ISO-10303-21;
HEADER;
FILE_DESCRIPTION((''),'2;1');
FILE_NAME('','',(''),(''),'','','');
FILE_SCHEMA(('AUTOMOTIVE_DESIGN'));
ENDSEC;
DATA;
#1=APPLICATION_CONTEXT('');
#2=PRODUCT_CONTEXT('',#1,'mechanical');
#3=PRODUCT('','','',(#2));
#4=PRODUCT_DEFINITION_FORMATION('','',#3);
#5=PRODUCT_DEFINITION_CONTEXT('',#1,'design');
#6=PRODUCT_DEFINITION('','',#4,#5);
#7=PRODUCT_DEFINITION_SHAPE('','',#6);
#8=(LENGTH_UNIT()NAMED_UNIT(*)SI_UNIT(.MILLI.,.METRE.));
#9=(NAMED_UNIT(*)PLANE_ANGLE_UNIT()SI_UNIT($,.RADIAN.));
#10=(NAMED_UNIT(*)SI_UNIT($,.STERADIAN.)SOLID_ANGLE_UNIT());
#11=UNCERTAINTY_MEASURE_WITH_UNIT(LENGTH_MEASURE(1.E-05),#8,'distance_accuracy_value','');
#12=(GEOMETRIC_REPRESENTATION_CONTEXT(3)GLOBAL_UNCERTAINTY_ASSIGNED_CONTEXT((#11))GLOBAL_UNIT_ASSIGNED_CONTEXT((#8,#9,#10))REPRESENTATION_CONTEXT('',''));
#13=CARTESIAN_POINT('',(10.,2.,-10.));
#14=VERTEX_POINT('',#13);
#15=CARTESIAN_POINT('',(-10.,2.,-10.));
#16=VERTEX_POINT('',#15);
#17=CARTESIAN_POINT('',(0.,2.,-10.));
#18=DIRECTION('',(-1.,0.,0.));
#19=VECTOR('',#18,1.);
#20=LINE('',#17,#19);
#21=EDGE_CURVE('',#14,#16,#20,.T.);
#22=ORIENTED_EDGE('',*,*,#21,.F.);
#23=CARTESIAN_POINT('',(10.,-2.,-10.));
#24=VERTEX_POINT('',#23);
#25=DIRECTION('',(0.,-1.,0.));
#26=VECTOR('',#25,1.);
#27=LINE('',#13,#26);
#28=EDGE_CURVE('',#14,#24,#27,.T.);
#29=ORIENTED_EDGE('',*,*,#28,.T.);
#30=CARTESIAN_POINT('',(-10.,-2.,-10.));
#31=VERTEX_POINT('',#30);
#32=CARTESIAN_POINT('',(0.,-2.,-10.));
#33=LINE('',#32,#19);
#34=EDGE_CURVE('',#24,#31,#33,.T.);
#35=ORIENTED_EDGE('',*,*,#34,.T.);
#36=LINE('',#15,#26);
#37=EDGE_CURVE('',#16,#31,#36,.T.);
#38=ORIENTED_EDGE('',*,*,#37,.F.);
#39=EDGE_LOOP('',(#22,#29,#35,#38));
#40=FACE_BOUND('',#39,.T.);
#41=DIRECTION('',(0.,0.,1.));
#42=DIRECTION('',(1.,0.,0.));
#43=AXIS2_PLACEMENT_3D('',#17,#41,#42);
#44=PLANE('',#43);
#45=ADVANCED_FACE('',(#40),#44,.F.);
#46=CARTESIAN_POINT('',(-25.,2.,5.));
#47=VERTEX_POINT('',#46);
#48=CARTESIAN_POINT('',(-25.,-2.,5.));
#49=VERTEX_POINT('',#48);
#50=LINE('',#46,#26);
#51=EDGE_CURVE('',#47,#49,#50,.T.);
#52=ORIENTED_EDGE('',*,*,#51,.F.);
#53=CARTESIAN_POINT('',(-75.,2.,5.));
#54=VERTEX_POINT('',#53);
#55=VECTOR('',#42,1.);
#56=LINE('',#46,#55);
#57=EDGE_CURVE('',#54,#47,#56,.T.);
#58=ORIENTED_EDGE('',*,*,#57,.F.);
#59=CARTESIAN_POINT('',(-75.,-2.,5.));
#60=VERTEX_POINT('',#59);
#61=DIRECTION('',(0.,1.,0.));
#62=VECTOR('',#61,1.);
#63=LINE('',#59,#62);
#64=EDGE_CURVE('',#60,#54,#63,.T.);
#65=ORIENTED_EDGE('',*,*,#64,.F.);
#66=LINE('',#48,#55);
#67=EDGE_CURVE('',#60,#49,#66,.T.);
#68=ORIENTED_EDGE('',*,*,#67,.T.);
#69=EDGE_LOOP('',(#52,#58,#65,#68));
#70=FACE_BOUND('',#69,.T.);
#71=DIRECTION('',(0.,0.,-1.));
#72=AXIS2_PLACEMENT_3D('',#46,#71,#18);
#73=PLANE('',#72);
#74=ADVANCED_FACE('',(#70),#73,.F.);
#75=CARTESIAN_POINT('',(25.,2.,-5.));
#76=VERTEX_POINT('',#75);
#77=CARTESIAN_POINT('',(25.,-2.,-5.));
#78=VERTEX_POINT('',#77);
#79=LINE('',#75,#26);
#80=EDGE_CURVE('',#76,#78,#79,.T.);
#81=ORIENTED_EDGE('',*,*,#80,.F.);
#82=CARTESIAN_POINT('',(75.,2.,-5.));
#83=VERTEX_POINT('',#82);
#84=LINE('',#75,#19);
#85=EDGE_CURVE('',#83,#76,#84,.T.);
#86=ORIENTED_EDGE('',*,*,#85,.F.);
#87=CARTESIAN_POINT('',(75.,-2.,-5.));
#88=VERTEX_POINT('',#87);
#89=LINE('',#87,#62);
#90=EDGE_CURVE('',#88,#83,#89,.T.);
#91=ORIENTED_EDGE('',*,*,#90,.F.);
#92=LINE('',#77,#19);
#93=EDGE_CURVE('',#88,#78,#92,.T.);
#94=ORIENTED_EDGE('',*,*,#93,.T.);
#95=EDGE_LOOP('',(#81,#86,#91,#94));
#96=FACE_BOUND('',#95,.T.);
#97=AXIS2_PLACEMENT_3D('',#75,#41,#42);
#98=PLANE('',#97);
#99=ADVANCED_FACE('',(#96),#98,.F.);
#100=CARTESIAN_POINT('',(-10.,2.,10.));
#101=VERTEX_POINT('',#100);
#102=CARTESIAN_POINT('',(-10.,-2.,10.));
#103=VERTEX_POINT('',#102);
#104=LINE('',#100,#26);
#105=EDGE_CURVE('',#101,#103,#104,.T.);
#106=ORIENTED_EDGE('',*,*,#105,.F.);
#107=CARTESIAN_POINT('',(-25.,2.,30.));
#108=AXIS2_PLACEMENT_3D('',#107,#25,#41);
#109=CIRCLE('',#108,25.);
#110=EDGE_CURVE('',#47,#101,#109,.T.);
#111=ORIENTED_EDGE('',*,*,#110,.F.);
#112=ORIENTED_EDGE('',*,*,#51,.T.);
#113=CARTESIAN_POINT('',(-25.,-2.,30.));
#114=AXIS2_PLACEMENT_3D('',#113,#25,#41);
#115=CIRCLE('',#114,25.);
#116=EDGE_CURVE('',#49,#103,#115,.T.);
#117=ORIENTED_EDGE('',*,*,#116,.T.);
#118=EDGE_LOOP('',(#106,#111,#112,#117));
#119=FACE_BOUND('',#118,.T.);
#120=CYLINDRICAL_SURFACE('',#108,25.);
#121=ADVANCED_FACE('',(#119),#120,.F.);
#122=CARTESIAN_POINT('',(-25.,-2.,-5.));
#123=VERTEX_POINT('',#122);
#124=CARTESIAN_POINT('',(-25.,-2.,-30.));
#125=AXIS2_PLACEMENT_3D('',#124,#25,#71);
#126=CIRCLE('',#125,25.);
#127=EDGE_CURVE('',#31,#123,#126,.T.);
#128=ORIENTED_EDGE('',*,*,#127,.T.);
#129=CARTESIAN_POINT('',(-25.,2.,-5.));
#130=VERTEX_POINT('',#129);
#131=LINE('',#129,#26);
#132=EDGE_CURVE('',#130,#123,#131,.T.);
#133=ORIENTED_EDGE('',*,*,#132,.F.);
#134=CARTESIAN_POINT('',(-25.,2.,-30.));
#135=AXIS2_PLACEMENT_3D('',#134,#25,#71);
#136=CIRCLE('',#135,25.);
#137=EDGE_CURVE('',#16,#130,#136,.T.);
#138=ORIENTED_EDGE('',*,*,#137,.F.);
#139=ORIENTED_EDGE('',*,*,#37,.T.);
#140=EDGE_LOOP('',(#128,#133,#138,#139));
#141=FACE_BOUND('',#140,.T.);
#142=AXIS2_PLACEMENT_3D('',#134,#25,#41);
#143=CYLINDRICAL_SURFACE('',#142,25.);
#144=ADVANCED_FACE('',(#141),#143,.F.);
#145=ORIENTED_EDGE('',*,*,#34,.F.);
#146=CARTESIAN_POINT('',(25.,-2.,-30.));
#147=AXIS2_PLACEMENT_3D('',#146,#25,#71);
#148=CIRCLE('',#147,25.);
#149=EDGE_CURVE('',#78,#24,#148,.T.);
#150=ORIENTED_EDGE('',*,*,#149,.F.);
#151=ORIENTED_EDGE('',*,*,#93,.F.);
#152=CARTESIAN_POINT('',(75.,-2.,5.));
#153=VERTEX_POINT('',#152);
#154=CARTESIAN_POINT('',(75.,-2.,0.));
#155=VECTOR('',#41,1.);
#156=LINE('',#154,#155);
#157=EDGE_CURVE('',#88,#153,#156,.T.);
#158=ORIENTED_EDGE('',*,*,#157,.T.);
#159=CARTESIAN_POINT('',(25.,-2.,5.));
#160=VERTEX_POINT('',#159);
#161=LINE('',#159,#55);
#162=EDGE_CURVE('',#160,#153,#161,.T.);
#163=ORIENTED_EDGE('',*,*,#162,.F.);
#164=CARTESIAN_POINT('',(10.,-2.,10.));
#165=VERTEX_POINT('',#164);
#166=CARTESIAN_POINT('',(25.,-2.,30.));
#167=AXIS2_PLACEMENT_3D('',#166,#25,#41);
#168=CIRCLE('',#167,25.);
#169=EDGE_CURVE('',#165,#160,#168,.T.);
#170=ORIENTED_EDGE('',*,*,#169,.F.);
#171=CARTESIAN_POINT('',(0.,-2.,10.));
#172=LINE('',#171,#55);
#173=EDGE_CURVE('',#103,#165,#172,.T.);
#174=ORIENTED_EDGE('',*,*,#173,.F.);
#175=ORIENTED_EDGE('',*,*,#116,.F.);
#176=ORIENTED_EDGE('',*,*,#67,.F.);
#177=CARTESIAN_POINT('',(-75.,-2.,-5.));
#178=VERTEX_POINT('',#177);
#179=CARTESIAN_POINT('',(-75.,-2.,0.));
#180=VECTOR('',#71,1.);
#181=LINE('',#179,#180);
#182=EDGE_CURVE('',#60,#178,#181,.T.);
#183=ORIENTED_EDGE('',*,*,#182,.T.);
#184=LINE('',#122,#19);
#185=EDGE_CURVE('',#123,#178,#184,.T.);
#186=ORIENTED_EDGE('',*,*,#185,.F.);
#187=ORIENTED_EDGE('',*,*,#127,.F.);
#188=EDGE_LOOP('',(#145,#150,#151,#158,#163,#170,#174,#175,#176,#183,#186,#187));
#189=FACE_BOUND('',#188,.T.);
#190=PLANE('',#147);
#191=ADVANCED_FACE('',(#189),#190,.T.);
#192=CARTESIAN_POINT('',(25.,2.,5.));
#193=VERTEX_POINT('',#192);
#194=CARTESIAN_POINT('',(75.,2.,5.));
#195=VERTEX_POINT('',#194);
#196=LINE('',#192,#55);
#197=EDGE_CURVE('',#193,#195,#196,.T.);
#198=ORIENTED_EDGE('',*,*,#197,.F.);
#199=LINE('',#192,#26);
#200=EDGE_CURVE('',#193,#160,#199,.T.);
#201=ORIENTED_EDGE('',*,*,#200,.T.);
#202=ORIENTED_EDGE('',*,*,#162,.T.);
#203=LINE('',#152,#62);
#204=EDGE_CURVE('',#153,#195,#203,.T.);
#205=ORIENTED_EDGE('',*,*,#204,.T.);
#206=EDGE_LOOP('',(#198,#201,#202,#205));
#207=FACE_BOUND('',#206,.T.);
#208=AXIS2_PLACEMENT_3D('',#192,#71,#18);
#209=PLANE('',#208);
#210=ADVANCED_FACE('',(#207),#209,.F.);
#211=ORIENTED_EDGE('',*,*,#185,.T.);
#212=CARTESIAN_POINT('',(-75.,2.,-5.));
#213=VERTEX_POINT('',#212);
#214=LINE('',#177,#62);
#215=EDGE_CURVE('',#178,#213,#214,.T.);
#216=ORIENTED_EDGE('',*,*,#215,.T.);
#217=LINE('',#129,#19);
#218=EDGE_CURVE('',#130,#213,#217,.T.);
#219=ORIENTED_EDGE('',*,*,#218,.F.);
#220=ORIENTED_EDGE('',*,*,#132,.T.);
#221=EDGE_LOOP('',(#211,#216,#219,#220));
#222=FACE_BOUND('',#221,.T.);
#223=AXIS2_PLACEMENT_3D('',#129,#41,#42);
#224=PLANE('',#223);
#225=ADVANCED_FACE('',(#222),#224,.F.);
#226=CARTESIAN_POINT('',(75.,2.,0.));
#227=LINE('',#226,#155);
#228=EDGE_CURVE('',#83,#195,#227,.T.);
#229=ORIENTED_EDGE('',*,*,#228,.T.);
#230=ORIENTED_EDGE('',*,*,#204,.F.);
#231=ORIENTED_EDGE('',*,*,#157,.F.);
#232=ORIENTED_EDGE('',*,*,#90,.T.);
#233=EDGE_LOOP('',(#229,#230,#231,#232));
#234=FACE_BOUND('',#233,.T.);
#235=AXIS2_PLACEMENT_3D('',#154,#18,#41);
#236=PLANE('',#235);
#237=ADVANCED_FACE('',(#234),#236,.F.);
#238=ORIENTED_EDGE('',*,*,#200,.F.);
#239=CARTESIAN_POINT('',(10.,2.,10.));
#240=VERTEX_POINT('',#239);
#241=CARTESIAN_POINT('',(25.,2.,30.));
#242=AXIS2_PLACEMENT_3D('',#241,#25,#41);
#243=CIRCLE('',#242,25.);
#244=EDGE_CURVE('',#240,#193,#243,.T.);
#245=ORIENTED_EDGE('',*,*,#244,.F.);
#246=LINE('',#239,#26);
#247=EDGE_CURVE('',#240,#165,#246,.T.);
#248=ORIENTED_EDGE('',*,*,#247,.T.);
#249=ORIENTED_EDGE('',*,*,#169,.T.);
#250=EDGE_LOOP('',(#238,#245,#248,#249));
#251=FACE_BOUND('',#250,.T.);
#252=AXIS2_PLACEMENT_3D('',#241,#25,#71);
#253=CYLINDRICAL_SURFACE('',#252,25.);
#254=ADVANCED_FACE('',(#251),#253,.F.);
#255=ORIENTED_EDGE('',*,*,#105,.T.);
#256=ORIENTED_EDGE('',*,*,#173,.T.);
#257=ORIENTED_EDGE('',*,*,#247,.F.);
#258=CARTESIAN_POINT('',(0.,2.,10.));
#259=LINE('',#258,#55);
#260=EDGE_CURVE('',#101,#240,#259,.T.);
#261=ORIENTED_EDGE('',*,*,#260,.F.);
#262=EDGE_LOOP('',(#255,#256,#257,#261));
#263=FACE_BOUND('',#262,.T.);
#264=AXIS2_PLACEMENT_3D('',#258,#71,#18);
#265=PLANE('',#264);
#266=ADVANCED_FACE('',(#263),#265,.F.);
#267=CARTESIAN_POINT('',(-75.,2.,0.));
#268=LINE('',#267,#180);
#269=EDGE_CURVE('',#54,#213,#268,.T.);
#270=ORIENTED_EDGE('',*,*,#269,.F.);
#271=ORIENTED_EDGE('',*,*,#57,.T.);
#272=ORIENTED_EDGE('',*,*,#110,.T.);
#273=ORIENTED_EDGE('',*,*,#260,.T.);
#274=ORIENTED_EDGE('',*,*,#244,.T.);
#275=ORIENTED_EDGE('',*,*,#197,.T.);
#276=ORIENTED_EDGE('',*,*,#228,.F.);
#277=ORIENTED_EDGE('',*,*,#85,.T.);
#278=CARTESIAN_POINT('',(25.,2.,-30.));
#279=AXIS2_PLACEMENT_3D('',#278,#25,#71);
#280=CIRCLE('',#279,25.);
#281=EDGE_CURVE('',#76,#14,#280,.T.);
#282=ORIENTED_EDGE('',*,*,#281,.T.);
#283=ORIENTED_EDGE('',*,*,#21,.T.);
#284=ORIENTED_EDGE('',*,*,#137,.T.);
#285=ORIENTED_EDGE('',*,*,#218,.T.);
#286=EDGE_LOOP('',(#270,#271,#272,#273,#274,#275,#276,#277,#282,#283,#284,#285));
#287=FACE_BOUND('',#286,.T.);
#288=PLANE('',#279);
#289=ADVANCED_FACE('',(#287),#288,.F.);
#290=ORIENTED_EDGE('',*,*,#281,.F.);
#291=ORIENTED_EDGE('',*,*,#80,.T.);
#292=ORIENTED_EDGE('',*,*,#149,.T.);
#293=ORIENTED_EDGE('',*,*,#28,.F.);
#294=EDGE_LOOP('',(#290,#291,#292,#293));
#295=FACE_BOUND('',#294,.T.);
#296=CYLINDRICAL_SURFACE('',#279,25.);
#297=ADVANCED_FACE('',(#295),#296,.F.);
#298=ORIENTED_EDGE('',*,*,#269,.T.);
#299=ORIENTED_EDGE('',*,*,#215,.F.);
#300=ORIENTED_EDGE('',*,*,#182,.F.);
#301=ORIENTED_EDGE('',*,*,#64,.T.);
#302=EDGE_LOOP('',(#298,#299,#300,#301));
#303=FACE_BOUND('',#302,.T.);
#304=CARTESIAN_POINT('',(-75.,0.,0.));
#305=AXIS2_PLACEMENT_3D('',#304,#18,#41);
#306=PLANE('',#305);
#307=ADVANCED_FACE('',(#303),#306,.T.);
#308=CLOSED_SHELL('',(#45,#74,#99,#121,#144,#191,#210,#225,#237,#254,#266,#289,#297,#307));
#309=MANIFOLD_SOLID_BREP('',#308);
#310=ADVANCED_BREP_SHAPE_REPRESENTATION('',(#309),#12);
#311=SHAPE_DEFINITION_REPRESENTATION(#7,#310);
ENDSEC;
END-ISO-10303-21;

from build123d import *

# Parameters (mm, degrees)
BOSS_EXTRUDE1_DEPTH     = 2
CUT_EXTRUDE2_DEPTH      = 98.534609242
CUT_EXTRUDE2_DEPTH_BACK = 98.534609242
CIRPATTERN2_START       = -2
CIRPATTERN2_DEPTH       = 4


# Read off the part's stored shape, not the designer's step: CirPattern2
with BuildPart() as part:
    # Sketch1 → Boss-Extrude1 (new, symmetric)
    with BuildSketch(Plane(origin=(0, 0, 0), x_dir=(1, 0, 0), z_dir=(0, 1, 0))):
        with BuildLine():
            Line((25, 5), (97, 5))
            Line((97, 5), (97, -5))
            Line((97, -5), (25, -5))
            ThreePointArc((25, -5), (17.09430585, -6.282917549), (10, -10))
            Line((10, -10), (0, -10))
            Line((0, -10), (0, 10))
            Line((0, 10), (10, 10))
            ThreePointArc((10, 10), (17.09430585, 6.282917549), (25, 5))
        make_face()
    extrude(amount=BOSS_EXTRUDE1_DEPTH, both=True)

    # Sketch2<3> → Cut-Extrude2 (cut, two sides: drawn at the far end of the back side and taken through both)
    with BuildSketch(Plane(origin=(0, 0, 0), x_dir=(1, 0, 0), z_dir=(0, 1, 0)).offset(-CUT_EXTRUDE2_DEPTH_BACK)):
        Polygon((75, 5), (75, 0), (80.958767963, -5), (97, -5), (97, 5), align=None)
        Polygon((80.958767963, -5), (75, 0), (75, -5), align=None)
    extrude(amount=CUT_EXTRUDE2_DEPTH + CUT_EXTRUDE2_DEPTH_BACK, mode=Mode.SUBTRACT)

    # CirPattern2 outline → CirPattern2 (add)
    with BuildSketch(Plane(origin=(0, 0, 0), x_dir=(1, 0, 0), z_dir=(0, 1, 0)).offset(CIRPATTERN2_START)):
        with BuildLine():
            Line((0, 10), (-10, 10))
            ThreePointArc((-10, 10), (-17.09430585, 6.282917549), (-25, 5))
            Line((-25, 5), (-75, 5))
            Line((-75, 5), (-75, -5))
            Line((-75, -5), (-25, -5))
            ThreePointArc((-25, -5), (-17.09430585, -6.282917549), (-10, -10))
            Line((-10, -10), (0, -10))
            Line((0, -10), (0, 10))
        make_face()
    extrude(amount=CIRPATTERN2_DEPTH)


solid = part.part
